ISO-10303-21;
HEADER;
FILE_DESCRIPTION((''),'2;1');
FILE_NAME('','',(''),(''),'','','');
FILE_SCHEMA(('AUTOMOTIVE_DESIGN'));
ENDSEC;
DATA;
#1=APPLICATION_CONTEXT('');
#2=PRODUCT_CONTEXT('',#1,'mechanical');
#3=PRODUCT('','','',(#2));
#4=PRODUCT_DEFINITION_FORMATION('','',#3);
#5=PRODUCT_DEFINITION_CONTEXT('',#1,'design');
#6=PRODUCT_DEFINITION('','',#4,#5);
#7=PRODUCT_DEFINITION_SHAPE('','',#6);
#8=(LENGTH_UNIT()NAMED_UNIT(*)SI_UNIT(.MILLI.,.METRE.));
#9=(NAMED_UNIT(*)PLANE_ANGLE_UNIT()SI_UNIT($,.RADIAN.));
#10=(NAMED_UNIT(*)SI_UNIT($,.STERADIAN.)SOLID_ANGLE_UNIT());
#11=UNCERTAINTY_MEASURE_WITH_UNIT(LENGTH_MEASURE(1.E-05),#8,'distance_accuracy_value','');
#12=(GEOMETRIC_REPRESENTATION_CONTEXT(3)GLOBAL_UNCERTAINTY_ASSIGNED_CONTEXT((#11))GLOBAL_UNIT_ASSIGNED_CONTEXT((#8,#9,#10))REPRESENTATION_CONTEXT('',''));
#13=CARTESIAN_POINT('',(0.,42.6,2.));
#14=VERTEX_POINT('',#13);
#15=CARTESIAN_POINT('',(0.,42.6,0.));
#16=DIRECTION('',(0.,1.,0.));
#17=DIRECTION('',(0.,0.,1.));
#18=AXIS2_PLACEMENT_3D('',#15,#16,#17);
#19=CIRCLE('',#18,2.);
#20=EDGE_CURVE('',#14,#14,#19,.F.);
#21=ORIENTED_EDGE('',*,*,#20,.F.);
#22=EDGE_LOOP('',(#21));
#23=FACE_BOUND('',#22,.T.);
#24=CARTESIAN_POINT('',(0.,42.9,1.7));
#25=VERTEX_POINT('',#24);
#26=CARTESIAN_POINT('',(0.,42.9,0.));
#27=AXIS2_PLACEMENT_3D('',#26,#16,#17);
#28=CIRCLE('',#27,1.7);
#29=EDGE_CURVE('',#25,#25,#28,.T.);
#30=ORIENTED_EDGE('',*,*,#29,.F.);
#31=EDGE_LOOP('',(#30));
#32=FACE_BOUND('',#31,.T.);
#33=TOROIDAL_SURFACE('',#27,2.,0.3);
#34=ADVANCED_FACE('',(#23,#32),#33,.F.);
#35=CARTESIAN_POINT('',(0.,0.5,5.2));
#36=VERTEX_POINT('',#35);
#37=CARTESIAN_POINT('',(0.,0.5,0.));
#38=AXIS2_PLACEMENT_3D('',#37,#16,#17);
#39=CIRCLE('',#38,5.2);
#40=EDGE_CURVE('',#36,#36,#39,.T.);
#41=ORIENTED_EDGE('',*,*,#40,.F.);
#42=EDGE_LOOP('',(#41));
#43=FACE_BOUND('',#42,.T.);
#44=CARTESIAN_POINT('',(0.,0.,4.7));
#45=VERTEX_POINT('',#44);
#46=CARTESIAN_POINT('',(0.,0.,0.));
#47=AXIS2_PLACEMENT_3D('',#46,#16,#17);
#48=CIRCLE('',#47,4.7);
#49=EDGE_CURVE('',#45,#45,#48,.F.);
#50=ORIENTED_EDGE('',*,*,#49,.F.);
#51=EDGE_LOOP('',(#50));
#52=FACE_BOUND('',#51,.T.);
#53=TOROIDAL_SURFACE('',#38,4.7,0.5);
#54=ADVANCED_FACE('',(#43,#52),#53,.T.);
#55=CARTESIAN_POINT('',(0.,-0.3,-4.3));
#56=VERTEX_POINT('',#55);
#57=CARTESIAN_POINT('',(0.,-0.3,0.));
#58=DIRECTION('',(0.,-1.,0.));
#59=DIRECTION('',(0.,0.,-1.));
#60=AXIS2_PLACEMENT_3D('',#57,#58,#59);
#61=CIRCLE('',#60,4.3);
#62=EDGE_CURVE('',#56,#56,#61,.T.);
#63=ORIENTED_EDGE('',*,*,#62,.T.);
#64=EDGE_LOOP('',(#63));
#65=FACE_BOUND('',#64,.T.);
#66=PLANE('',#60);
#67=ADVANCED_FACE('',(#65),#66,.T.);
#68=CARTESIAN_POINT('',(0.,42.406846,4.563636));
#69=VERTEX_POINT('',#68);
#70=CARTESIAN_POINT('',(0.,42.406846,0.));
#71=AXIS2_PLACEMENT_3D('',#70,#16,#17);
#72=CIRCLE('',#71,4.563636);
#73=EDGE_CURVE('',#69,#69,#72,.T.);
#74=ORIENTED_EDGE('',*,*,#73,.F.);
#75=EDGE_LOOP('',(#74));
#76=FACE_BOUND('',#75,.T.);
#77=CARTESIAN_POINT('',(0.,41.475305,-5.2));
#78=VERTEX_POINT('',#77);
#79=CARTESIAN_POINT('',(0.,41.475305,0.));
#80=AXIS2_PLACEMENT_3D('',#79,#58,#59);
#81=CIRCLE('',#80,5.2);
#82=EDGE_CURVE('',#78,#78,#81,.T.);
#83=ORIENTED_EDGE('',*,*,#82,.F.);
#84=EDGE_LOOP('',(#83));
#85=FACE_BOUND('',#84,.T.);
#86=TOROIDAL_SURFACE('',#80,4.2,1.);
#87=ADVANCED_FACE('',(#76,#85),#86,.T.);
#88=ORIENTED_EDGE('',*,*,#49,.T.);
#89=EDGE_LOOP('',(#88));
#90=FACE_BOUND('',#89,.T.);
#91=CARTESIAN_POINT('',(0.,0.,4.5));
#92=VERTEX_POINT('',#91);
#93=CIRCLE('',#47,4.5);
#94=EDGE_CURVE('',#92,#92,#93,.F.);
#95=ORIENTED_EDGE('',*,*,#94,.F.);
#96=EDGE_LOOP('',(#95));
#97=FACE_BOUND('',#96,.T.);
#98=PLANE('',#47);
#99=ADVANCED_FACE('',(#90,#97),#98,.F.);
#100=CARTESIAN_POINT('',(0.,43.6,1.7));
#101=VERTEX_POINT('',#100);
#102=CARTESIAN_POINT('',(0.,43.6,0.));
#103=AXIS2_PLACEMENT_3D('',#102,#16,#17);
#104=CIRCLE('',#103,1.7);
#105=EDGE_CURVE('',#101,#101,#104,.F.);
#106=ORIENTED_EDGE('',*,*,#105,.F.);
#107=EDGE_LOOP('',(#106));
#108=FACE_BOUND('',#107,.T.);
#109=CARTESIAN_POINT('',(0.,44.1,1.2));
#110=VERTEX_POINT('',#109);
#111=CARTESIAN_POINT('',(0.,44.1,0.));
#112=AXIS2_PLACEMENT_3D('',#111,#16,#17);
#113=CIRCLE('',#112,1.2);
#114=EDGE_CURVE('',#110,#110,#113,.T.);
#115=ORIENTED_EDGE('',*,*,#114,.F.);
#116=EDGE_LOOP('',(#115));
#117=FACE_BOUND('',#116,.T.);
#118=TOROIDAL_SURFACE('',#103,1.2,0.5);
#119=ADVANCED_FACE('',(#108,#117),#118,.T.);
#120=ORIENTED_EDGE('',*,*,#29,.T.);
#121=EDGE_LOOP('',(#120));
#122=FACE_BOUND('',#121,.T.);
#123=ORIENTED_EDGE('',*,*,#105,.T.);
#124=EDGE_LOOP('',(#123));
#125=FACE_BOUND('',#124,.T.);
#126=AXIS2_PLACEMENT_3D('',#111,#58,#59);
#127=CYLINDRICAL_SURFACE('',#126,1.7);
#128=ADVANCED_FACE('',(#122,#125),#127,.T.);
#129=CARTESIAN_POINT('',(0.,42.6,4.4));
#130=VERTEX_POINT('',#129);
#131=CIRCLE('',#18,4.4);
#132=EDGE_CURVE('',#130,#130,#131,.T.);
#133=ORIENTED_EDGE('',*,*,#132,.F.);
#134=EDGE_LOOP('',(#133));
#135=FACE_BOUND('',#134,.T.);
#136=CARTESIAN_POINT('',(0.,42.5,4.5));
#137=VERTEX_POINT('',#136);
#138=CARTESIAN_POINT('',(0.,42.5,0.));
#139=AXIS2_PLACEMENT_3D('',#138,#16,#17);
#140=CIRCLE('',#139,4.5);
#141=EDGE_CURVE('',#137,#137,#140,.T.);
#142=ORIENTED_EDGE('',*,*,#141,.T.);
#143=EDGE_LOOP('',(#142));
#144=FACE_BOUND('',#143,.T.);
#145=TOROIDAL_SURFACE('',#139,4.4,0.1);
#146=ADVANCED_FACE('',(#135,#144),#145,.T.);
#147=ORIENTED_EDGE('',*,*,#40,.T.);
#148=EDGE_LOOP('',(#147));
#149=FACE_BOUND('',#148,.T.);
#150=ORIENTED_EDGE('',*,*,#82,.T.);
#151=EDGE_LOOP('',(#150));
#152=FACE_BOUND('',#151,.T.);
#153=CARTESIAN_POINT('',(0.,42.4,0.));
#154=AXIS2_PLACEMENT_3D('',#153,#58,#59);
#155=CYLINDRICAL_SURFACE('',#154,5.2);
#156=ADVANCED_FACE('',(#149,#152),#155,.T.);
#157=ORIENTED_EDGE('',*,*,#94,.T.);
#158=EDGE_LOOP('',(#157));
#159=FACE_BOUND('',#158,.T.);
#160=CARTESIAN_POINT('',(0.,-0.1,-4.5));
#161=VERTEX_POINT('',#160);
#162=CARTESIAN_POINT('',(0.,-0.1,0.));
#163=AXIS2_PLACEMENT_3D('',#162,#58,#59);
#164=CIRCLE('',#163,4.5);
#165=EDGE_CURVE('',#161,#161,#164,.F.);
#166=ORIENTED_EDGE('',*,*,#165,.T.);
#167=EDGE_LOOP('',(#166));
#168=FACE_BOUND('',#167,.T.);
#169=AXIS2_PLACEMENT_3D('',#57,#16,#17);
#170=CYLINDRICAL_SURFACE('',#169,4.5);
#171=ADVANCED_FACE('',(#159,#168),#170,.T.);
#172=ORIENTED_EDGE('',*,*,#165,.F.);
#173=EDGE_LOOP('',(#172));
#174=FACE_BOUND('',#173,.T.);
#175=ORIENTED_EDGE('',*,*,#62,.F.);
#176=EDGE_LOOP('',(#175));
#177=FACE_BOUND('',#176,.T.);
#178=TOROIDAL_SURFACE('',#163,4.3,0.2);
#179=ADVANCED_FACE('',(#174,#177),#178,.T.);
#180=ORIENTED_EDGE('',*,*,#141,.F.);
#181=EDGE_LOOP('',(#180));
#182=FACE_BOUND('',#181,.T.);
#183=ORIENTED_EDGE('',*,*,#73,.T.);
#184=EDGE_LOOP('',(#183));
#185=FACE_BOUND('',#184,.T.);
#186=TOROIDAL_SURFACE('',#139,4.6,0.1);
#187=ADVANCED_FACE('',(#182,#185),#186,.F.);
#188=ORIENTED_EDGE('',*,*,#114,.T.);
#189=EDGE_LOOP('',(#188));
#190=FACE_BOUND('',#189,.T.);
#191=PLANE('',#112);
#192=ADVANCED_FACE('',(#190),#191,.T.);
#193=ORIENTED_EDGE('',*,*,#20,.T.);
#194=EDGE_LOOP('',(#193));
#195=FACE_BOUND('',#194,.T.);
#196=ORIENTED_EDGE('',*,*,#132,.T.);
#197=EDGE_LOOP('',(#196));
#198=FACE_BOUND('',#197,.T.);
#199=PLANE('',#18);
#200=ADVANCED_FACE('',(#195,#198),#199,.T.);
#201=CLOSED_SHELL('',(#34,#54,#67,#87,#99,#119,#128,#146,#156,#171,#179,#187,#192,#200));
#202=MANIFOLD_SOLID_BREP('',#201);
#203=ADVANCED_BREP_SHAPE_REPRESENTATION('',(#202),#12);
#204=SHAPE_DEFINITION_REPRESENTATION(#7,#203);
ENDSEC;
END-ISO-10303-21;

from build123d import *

# Parameters (mm, degrees)
SKETCH1_R           = 5.2
BOSS_EXTRUDE1_DEPTH = 42.4
SKETCH2_R           = 4.5
BOSS_EXTRUDE2_DEPTH = 0.3
BOSS_EXTRUDE3_START = 0.2
SKETCH3_R           = 4.5
BOSS_EXTRUDE3_DEPTH = 0.2
SKETCH4_R           = 1.7
BOSS_EXTRUDE4_DEPTH = 1.5
FILLET1_R           = 0.5
FILLET2_R           = 0.1
FILLET3_R           = 0.1
FILLET4_R           = 1
FILLET7_R           = 0.3
FILLET8_R           = 0.2
FILLET9_R           = 0.5


with BuildPart() as part:
    # Sketch1 → Boss-Extrude1 (new body)
    with BuildSketch(Plane(origin=(0, 0, 0), x_dir=(1, 0, 0), z_dir=(0, 1, 0))):
        with Locations(Location((0, 0, 0), (0, 0, 270))):
            Circle(SKETCH1_R)
    extrude(amount=BOSS_EXTRUDE1_DEPTH)

    # Sketch2 → Boss-Extrude2 (add)
    with BuildSketch(Plane.XZ):
        with Locations(Location((0, 0, 0), (0, 0, 90))):
            Circle(SKETCH2_R)
    extrude(amount=BOSS_EXTRUDE2_DEPTH)

    # Sketch3 → Boss-Extrude3 (add)
    with BuildSketch(Plane(origin=(0, 42.4, 0), x_dir=(1, 0, 0), z_dir=(0, 1, 0)).offset(BOSS_EXTRUDE3_START)):
        with Locations(Location((0, 0, 0), (0, 0, 270))):
            Circle(SKETCH3_R)
    extrude(amount=-BOSS_EXTRUDE3_DEPTH)

    # Sketch4 → Boss-Extrude4 (add)
    with BuildSketch(Plane(origin=(0, 42.6, 0), x_dir=(1, 0, 0), z_dir=(0, 1, 0))):
        with Locations(Location((0, 0, 0), (0, 0, 270))):
            Circle(SKETCH4_R)
    extrude(amount=BOSS_EXTRUDE4_DEPTH)

    # Fillet1
    fillet1_edges = [part.edges().sort_by_distance(p)[0] for p in [
        (0, 44.1, -1.7),
    ]]
    fillet(fillet1_edges, radius=FILLET1_R)

    # Fillet2
    fillet2_edges = [part.edges().sort_by_distance(p)[0] for p in [
        (0, 42.4, -4.5),
    ]]
    fillet(fillet2_edges, radius=FILLET2_R)

    # Fillet3
    fillet3_edges = [part.edges().sort_by_distance(p)[0] for p in [
        (0, 42.6, -4.5),
    ]]
    fillet(fillet3_edges, radius=FILLET3_R - 0.0001)  # a hair under: the kernel refuses the full size

    # Fillet4
    fillet4_edges = [part.edges().sort_by_distance(p)[0] for p in [
        (0, 42.4, -5.2),
    ]]
    fillet(fillet4_edges, radius=FILLET4_R)

    # Fillet7
    fillet7_edges = [part.edges().sort_by_distance(p)[0] for p in [
        (0, 42.6, -1.7),
    ]]
    fillet(fillet7_edges, radius=FILLET7_R)

    # Fillet8
    fillet8_edges = [part.edges().sort_by_distance(p)[0] for p in [
        (0, -0.3, -4.5),
    ]]
    fillet(fillet8_edges, radius=FILLET8_R)

    # Fillet9
    fillet9_edges = [part.edges().sort_by_distance(p)[0] for p in [
        (0, 0, -5.2),
    ]]
    fillet(fillet9_edges, radius=FILLET9_R)


solid = part.part
